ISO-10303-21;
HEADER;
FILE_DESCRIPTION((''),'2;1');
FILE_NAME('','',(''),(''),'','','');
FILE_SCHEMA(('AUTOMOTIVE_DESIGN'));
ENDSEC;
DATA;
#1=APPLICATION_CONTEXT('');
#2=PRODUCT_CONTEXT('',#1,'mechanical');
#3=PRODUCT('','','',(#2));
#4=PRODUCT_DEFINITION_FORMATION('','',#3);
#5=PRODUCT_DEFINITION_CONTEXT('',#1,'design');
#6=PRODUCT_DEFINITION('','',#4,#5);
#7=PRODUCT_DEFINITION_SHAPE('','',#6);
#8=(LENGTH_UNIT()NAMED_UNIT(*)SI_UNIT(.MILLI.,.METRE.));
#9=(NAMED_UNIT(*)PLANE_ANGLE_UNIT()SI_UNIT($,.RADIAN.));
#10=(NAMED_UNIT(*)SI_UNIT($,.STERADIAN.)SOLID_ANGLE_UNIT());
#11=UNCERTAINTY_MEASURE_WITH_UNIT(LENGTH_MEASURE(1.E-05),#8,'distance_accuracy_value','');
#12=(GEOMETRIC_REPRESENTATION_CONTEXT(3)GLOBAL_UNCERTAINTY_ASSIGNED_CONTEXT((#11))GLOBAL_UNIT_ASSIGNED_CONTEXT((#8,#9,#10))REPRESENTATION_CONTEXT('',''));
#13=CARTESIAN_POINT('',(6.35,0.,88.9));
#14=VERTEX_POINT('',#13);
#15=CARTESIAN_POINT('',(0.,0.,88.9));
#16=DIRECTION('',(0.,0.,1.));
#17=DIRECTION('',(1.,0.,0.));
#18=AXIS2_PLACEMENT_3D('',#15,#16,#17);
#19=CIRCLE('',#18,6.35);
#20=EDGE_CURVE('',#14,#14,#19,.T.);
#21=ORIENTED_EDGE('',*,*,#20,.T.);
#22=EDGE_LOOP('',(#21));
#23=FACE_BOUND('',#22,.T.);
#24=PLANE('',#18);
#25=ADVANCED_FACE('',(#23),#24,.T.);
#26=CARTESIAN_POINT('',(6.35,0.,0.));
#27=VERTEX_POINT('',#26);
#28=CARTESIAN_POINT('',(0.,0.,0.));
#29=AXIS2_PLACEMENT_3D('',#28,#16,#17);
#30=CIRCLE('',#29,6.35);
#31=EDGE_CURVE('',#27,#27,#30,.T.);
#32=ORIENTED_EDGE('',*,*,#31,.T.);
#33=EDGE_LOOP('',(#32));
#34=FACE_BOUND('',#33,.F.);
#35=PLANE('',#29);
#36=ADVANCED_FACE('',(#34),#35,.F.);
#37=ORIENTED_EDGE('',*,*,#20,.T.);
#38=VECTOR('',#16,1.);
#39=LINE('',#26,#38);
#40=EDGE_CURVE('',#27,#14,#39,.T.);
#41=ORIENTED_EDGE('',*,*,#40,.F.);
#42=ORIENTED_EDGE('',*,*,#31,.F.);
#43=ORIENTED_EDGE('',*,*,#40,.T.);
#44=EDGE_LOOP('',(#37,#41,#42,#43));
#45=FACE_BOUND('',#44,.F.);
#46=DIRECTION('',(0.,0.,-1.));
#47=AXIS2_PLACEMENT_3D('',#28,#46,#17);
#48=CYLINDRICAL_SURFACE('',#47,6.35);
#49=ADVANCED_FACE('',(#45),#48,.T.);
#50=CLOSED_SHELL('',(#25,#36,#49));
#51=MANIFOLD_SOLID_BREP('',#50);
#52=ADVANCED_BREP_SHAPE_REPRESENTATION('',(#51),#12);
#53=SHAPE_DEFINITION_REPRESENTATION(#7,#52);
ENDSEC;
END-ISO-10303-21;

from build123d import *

# Parameters (mm, degrees)
F1_R     = 6.35
F2_DEPTH = 88.9


# Not quite as in the source:
# - a variable given as a bare number and used for a length is read in inches; the dataset says mm whatever the document's units were


with BuildPart() as f2:
    # F1 (on Top) → F2 (new body)
    with BuildSketch(Plane.XY):
        Circle(F1_R)
    extrude(amount=F2_DEPTH)


solid = f2.part
